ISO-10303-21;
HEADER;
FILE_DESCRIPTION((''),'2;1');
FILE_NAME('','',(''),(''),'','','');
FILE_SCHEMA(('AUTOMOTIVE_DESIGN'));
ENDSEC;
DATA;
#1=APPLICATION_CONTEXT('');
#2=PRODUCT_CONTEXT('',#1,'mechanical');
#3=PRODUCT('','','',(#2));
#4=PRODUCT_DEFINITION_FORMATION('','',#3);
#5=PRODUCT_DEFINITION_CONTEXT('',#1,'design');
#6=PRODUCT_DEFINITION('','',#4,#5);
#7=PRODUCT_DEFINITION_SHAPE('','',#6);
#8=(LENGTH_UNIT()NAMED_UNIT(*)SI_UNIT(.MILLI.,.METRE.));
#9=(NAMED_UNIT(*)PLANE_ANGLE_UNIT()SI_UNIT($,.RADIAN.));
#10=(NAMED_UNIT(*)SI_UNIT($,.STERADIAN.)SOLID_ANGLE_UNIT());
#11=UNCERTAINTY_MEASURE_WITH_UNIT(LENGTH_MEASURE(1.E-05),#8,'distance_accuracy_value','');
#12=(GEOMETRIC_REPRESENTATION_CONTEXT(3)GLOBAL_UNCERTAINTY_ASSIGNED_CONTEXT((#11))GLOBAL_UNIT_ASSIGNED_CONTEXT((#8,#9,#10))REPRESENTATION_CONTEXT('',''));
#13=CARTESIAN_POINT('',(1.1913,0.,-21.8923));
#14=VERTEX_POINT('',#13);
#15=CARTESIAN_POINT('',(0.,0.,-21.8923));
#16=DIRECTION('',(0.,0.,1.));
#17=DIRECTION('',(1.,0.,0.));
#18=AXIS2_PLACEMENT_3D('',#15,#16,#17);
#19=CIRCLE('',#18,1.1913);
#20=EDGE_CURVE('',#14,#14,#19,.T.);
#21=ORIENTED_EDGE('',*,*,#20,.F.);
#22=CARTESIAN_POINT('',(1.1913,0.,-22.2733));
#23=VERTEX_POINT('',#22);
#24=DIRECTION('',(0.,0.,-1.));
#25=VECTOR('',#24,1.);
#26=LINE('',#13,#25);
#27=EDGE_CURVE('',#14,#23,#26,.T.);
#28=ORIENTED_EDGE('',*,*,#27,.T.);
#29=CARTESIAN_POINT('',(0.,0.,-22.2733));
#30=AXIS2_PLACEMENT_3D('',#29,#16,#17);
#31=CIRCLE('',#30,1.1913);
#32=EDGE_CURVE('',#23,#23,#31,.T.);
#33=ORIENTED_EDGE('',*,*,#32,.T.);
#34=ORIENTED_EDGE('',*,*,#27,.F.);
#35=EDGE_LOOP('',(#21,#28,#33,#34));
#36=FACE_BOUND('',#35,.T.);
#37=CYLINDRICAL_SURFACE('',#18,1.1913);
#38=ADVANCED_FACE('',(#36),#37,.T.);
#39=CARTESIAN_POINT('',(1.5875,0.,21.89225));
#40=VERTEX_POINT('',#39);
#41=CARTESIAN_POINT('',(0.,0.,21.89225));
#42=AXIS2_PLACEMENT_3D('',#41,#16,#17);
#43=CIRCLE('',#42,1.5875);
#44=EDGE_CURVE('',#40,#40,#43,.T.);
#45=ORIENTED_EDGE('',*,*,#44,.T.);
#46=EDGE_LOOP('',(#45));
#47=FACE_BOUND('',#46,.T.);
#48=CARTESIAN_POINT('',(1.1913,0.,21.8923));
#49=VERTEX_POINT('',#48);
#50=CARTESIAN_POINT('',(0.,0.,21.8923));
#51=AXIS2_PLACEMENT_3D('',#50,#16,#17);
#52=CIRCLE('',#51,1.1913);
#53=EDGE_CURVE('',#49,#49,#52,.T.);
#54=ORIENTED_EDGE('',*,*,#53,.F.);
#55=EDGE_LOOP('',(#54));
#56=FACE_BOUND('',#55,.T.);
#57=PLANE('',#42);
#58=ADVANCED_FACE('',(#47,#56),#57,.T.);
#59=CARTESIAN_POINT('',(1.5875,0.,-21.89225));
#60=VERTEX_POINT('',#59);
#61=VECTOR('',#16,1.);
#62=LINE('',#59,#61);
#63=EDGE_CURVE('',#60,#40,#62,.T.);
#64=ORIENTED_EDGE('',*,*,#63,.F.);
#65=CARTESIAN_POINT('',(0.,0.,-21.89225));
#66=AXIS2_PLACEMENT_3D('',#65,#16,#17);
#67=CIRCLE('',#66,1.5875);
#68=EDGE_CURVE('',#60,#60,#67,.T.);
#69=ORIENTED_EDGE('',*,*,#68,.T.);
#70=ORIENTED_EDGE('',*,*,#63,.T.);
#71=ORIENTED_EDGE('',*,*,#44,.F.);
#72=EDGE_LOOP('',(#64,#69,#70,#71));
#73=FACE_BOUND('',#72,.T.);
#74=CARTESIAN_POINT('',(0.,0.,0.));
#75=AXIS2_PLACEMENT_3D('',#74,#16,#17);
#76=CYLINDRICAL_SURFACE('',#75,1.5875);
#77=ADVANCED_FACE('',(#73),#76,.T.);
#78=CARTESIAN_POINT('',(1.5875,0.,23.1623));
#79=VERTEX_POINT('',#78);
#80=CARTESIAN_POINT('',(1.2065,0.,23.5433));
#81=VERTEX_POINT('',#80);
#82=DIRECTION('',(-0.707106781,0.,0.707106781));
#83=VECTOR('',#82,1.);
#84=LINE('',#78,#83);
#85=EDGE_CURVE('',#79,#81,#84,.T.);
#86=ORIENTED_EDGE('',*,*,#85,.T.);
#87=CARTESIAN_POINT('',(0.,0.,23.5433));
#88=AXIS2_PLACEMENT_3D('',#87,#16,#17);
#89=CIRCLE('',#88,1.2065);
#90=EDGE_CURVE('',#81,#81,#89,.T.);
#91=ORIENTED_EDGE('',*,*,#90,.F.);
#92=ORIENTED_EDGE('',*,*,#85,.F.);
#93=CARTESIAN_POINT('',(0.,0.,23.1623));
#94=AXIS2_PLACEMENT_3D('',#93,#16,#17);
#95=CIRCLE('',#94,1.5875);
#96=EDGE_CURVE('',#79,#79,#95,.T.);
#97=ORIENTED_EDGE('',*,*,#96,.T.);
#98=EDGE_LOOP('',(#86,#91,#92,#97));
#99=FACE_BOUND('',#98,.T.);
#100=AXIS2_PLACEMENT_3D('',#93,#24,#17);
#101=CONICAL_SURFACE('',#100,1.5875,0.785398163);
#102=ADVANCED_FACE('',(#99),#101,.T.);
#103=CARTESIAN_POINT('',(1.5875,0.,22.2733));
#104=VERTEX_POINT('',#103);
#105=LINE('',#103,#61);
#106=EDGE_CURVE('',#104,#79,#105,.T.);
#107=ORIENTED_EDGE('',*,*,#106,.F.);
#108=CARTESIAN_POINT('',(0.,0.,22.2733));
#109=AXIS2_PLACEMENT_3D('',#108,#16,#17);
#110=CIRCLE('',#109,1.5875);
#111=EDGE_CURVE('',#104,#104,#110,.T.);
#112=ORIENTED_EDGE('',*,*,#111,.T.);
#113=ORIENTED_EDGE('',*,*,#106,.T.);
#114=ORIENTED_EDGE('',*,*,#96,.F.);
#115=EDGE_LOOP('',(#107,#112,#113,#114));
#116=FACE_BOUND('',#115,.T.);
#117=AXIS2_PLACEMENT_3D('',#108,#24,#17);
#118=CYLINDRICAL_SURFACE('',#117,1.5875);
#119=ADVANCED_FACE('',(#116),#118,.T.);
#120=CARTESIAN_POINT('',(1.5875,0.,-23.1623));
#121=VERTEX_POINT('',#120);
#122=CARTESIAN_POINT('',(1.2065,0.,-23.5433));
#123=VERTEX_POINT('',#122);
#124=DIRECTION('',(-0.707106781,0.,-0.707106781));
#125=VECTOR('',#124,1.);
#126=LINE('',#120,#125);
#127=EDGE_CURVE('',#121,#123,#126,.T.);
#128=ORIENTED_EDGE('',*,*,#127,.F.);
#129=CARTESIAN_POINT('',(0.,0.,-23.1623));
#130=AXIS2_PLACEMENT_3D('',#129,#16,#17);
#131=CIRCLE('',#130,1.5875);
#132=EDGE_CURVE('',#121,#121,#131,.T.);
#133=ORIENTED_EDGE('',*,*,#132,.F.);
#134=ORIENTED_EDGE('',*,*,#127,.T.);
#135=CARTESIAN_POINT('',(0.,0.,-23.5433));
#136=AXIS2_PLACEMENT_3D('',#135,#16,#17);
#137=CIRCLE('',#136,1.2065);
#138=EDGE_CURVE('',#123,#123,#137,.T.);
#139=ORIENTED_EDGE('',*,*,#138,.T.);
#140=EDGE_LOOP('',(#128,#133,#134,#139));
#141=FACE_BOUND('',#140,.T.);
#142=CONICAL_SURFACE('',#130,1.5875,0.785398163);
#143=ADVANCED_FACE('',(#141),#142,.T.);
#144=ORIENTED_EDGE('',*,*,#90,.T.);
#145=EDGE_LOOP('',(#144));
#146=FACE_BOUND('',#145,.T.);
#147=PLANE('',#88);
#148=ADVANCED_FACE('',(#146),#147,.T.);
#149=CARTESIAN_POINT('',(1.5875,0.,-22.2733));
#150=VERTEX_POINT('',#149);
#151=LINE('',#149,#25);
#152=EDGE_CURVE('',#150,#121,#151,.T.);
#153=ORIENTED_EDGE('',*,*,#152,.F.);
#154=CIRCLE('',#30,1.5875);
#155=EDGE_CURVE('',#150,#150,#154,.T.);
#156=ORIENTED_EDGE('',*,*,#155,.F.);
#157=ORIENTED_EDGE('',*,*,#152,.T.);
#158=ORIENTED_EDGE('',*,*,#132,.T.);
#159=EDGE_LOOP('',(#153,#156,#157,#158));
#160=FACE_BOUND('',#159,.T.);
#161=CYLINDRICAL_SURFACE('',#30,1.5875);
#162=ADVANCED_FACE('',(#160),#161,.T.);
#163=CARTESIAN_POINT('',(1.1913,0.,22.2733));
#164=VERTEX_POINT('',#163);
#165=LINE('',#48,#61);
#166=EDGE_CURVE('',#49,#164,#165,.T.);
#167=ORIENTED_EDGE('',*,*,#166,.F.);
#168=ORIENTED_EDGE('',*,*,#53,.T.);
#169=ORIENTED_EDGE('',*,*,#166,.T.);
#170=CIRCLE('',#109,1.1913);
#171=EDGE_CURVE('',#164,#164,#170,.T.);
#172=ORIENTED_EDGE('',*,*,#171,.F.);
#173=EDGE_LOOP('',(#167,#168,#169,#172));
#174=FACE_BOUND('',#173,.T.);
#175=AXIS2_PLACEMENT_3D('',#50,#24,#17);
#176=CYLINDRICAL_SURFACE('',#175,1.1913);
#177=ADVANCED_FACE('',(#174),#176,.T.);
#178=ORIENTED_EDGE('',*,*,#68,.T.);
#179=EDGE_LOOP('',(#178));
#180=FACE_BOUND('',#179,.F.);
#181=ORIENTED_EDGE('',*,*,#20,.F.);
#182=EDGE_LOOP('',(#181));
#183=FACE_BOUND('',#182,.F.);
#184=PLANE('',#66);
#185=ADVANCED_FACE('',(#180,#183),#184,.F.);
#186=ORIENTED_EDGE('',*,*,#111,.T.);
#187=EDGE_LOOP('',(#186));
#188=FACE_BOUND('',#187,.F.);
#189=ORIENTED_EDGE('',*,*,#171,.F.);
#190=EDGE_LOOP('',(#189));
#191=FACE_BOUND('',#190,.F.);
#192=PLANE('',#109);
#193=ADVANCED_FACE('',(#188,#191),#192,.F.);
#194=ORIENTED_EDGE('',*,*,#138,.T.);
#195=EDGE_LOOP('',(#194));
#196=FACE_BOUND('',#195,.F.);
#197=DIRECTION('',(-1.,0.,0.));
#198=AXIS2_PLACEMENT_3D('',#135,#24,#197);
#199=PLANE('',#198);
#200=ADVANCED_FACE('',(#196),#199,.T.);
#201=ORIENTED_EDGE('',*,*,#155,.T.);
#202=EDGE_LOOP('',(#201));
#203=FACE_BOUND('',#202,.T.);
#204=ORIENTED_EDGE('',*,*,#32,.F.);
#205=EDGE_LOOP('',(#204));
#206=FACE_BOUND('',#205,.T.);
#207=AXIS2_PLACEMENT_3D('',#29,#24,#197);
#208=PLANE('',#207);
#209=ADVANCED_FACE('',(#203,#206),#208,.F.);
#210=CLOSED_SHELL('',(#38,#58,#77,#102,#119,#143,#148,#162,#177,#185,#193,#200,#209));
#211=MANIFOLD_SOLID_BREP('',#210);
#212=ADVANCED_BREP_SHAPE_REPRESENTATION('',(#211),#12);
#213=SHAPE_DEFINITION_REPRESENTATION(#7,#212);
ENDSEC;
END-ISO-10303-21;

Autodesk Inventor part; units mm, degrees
ref_plane "YZ Plane" through (0, 0, 0) normal (1, 0, 0) x (0, 1, 0)
ref_plane "XZ Plane" through (0, 0, 0) normal (0, 1, 0) x (-1, 0, 0)
ref_plane "XY Plane" through (0, 0, 0) normal (0, 0, 1) x (1, 0, 0)
sketch "Sketch1" plane through (0, 0, 0) normal (0, 0, 1) x (1, 0, 0)
  circle A0 centre (0, 0) radius 1.5875
  dimension "d0" = 3.175
extrude "Extrusion1" add sketch "Sketch1" along normal mid plane 43.7845
sketch "Sketch2" plane through (0, 0, 21.8923) normal (0, 0, 1) x (1, 0, 0)
  circle A0 centre (0, 0) radius 1.1913
  dimension "d3" = 2.3825
extrude "Extrusion2" add sketch "Sketch2" along normal blind 0.381
sketch "Sketch3" plane through (0, 0, 22.2733) normal (0, 0, 1) x (1, 0, 0)
  circle A0 centre (0, 0) radius 1.5875 projected
extrude "Extrusion3" add sketch "Sketch3" along normal blind 1.27
chamfer "Chamfer1" distance 0.381 angle 45 1 edges at (-1.5875, 0, 23.5433)
mirror "Mirror1" about plane through (0, 0, 0) normal (0, 0, 1) of "Extrusion2", "Extrusion3", "Chamfer1"
properties part number "Front Lower Hinge Pin"
